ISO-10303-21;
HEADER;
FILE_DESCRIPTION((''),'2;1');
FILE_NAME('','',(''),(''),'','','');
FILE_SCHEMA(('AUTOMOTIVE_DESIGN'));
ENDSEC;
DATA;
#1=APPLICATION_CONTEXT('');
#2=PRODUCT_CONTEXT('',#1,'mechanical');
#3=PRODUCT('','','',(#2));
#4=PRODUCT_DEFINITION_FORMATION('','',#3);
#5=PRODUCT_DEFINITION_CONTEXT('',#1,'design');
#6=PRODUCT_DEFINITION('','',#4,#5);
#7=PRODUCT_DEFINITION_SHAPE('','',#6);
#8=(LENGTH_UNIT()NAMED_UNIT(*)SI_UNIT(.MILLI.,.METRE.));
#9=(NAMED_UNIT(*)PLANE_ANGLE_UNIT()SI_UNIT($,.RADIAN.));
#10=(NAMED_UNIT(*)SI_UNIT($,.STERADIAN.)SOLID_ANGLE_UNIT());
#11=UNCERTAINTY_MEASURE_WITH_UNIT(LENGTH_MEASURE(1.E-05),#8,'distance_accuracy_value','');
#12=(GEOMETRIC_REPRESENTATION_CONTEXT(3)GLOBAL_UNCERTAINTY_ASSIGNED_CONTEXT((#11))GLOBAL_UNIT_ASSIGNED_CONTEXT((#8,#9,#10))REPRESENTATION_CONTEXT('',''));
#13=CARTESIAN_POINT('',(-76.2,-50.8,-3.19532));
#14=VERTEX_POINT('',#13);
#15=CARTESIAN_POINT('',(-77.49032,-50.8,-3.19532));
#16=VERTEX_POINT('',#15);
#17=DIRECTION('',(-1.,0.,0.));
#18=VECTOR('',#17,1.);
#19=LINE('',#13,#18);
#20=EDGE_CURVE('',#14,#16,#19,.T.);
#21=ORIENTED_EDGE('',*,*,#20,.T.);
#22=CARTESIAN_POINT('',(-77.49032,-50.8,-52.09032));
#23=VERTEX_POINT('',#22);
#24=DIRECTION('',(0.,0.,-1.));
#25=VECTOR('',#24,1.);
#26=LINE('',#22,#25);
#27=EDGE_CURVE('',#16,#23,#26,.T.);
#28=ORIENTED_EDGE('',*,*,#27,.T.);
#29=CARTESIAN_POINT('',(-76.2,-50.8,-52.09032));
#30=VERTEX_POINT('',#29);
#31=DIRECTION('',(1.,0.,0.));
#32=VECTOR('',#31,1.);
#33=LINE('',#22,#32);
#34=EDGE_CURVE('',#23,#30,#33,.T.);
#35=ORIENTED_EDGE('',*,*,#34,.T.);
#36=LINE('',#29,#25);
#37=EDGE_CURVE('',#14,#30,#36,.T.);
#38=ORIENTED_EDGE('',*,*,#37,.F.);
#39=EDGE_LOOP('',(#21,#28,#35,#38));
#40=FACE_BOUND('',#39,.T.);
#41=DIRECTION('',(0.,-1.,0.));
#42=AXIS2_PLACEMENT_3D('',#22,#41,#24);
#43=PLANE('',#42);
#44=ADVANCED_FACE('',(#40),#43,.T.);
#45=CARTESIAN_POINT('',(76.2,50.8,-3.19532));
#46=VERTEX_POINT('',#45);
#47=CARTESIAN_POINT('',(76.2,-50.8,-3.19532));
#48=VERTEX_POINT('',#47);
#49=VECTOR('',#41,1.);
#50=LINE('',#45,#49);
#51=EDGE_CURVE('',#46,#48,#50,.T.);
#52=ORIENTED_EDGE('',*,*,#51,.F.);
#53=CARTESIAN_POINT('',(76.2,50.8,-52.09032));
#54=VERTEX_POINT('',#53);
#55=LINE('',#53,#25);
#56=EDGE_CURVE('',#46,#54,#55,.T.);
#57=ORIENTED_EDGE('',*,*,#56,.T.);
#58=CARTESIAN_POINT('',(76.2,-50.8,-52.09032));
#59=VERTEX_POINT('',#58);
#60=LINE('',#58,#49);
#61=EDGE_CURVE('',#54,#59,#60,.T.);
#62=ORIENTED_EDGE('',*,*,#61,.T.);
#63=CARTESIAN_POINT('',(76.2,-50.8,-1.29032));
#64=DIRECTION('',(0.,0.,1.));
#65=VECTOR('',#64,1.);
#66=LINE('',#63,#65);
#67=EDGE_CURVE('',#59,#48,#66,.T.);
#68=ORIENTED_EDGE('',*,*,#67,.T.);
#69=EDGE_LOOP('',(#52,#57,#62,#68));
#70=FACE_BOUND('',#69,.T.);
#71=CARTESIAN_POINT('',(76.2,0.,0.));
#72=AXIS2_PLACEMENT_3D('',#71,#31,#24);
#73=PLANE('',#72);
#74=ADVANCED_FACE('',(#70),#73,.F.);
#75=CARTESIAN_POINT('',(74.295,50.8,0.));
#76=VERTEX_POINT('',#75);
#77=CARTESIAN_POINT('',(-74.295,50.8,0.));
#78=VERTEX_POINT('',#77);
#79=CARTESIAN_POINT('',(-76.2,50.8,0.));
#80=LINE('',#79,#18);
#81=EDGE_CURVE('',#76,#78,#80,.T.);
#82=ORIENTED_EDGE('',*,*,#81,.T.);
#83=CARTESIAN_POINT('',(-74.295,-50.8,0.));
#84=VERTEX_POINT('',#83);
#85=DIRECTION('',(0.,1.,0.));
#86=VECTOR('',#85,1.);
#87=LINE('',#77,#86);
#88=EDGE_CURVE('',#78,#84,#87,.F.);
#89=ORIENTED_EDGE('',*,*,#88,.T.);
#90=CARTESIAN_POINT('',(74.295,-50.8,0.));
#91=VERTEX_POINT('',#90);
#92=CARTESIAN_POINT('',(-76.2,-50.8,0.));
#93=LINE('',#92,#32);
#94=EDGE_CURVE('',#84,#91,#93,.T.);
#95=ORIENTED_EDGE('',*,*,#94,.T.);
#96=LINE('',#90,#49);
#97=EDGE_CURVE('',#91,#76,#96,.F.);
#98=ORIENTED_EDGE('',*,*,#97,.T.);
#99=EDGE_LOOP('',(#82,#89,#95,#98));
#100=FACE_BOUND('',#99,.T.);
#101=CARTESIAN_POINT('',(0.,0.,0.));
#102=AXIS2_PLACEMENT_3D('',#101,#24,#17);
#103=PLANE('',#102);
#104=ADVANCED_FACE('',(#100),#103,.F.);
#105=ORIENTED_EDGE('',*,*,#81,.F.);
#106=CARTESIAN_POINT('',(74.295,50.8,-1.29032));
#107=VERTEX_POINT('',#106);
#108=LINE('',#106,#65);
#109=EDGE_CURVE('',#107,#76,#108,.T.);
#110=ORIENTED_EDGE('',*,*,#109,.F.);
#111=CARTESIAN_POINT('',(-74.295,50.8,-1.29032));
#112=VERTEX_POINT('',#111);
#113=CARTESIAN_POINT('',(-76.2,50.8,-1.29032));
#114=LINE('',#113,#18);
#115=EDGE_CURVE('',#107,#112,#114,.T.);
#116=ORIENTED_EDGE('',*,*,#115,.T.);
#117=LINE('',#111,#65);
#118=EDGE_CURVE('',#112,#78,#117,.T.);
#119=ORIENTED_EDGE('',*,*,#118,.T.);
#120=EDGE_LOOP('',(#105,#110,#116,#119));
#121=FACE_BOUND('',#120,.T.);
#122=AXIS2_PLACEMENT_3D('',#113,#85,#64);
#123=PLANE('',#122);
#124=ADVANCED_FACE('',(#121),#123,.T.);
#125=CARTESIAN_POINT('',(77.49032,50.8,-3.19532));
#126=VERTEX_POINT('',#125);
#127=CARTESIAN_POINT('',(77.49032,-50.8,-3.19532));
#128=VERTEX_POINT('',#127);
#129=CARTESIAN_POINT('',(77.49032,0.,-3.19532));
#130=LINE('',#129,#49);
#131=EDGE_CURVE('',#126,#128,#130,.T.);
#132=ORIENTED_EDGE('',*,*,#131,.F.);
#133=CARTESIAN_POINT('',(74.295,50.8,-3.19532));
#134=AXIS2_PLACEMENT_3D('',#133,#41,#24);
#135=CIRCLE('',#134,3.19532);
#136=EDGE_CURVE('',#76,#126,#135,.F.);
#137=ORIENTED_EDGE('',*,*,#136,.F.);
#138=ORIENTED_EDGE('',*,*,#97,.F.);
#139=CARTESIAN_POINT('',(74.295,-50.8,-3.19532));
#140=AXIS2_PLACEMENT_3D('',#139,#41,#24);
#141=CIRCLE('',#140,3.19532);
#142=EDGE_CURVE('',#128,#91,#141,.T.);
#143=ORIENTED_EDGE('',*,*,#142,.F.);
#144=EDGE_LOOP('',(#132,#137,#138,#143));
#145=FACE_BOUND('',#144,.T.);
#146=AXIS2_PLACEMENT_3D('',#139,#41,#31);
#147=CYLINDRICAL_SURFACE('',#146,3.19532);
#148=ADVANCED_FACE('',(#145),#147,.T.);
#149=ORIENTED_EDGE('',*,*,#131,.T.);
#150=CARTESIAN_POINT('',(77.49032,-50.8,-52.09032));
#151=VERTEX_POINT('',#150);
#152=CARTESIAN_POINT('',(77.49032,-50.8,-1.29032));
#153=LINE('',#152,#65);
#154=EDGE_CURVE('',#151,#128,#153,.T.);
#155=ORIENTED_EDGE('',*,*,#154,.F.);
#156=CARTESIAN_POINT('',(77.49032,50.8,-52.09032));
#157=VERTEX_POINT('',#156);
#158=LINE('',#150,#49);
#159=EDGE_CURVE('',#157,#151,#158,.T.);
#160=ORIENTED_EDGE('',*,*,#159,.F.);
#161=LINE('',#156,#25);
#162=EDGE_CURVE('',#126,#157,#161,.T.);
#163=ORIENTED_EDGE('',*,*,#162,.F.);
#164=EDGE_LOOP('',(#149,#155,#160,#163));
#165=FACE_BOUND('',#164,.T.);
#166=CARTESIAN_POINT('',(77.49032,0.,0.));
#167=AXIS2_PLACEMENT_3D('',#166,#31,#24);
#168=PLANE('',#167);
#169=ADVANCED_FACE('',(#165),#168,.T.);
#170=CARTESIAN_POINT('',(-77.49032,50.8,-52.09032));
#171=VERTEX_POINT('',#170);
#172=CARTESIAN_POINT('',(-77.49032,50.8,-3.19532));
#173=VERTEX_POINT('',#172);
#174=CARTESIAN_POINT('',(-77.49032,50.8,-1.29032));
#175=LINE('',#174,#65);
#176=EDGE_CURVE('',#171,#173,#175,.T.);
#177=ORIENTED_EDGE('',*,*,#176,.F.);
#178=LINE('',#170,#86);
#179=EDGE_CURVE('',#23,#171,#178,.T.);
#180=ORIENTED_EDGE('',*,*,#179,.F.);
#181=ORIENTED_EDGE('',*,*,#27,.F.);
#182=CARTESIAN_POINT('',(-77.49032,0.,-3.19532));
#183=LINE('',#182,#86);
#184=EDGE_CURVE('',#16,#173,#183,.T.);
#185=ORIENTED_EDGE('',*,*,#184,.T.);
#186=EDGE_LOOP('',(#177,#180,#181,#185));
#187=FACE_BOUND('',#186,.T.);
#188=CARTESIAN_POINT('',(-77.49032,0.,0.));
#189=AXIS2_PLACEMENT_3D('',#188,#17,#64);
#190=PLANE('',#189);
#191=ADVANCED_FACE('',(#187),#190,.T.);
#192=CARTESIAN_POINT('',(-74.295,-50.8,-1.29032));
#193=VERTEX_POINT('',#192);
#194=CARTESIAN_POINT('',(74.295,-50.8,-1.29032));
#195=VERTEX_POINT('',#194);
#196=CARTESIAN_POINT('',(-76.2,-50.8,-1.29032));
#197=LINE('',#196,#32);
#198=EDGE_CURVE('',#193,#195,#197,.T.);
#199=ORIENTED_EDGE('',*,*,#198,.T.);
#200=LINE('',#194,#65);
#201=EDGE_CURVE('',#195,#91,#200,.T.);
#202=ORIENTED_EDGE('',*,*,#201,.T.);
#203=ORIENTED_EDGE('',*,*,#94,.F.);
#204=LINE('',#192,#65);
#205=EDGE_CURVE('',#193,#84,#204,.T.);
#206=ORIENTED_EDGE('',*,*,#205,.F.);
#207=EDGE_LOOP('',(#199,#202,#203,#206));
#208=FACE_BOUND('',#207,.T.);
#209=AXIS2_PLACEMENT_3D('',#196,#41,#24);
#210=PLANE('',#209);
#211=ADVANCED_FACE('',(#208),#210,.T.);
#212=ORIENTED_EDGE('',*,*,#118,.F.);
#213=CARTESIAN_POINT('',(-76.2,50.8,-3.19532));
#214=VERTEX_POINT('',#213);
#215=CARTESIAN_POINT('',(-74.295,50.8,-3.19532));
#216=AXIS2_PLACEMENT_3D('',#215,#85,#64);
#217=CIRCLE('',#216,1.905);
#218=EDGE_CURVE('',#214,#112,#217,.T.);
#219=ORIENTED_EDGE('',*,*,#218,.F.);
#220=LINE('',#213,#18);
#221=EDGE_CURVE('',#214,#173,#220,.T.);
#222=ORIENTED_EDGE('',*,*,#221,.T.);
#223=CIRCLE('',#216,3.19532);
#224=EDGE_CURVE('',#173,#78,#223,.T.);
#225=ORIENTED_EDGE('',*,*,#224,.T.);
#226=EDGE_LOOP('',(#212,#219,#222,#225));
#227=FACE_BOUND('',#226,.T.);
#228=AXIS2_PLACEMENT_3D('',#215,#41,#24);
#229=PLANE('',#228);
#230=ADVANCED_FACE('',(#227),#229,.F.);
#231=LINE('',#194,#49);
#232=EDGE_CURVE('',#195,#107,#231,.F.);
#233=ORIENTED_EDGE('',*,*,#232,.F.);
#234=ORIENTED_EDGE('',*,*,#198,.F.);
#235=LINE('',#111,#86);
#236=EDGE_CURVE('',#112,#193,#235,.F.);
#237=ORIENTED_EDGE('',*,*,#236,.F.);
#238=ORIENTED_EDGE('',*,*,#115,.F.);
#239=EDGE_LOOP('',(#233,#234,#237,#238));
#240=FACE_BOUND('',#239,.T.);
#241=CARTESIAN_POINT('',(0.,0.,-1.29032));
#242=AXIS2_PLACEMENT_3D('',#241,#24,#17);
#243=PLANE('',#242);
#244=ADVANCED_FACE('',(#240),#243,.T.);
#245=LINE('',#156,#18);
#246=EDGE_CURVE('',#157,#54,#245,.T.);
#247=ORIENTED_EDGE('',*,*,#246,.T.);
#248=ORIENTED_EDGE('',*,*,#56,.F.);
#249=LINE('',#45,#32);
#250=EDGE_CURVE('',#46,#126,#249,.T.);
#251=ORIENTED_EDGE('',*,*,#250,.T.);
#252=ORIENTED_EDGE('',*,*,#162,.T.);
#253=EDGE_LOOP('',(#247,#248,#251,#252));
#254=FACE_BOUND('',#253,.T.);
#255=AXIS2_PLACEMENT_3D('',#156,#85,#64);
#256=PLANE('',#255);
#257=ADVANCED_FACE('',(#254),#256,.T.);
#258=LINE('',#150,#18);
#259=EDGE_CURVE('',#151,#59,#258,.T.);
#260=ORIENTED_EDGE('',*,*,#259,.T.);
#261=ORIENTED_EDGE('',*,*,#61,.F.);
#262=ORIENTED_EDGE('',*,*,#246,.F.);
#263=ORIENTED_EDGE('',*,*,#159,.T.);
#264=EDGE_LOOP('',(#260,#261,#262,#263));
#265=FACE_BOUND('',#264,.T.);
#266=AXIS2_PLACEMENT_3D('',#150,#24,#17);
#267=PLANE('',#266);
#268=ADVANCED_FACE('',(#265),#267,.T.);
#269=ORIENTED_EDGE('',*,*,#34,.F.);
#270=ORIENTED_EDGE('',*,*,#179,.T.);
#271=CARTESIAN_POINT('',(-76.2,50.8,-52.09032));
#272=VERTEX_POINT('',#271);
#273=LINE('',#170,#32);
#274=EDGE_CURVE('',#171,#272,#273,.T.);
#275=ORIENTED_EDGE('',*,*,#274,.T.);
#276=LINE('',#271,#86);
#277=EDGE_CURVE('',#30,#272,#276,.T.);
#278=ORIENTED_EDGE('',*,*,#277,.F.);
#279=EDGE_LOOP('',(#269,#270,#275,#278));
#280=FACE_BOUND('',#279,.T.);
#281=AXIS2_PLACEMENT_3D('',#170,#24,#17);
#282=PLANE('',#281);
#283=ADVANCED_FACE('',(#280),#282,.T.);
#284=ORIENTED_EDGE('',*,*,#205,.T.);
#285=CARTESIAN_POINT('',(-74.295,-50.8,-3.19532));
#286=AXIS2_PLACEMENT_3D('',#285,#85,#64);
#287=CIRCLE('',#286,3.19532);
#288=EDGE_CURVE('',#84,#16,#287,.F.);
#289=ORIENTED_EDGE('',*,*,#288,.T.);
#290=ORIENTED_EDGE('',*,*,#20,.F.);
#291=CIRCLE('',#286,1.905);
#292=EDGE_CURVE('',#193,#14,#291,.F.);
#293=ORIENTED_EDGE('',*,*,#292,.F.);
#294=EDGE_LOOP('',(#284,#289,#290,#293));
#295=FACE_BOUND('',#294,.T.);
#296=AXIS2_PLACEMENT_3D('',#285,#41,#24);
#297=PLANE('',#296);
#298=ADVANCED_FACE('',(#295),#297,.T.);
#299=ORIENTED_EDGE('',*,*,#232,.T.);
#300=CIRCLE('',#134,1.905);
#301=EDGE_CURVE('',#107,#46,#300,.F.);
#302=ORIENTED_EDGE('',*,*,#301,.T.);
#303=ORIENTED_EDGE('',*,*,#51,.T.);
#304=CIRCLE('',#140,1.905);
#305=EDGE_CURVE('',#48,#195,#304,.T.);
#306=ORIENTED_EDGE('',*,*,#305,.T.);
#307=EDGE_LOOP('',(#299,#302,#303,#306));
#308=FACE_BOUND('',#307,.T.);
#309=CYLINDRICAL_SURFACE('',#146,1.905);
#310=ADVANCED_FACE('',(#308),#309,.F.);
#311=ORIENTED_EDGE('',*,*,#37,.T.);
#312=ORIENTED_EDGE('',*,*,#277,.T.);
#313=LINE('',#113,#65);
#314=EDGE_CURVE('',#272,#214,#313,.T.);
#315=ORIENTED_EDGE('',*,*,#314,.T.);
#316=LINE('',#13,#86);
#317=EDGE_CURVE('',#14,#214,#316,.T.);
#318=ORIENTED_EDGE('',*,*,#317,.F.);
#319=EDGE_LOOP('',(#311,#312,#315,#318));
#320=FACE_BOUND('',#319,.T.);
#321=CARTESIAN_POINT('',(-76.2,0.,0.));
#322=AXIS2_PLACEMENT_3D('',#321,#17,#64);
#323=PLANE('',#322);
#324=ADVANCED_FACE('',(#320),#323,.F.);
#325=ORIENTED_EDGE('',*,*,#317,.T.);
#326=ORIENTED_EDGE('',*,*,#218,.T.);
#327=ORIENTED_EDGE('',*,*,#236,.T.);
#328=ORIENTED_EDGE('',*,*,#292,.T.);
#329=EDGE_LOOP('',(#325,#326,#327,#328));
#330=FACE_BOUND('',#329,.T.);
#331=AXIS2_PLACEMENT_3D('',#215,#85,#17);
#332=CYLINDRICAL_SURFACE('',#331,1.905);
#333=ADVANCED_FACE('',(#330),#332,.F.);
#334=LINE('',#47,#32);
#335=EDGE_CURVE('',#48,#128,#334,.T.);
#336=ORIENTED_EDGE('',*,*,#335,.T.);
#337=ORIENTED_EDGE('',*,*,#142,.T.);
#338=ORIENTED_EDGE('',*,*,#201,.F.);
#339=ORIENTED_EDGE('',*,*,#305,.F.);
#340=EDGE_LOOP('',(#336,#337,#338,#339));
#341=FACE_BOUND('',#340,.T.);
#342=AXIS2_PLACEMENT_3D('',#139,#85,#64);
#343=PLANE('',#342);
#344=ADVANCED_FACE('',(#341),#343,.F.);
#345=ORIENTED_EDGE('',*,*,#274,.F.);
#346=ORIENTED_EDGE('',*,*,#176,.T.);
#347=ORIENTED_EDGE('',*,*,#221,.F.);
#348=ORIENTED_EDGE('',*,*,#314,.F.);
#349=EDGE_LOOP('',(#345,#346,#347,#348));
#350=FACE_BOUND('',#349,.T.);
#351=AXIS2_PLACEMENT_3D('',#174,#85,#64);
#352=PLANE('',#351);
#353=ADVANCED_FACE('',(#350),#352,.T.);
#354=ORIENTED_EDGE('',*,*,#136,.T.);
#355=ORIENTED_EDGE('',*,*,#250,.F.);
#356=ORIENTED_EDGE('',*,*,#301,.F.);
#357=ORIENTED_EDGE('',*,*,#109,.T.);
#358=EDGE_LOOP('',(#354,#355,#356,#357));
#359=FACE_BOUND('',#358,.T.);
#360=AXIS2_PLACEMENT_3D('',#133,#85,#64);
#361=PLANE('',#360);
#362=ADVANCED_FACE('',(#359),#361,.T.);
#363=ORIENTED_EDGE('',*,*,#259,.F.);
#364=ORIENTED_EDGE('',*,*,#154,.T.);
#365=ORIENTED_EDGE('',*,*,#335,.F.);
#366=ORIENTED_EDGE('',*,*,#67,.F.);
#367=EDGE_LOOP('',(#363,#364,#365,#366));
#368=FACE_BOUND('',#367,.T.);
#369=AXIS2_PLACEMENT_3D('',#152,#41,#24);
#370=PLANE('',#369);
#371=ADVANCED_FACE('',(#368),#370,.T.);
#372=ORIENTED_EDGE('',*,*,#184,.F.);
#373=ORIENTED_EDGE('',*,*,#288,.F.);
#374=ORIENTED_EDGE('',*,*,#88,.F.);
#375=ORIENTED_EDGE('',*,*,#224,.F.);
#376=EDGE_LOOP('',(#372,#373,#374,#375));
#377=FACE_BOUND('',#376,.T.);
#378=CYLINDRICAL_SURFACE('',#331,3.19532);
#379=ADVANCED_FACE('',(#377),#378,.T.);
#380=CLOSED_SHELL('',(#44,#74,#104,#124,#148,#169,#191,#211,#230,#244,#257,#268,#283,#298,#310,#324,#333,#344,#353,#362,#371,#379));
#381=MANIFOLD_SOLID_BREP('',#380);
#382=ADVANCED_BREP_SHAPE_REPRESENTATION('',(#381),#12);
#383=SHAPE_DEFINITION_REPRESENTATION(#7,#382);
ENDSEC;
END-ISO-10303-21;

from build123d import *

# Parameters (mm, degrees)
SKETCH1_W                      = 152.4
SKETCH1_H                      = 101.6
BASE_FLANGE1_DEPTH             = 1.29032
EDGE_FLANGE1_STRIP_W           = 8.97128
EDGE_FLANGE1_STRIP_H           = 1.29032
EDGE_FLANGE1_STRIP_CUT_DEPTH   = 101.6
EDGE_FLANGE1_STRIP_2_W         = 8.97128
EDGE_FLANGE1_STRIP_2_H         = 1.29032
EDGE_FLANGE1_STRIP_CUT_2_DEPTH = 101.6
EDGE_FLANGE1_DEPTH             = 101.6
EDGE_FLANGE1_BEND_DEPTH        = 101.6


# Sheet-metal steps are written as plain solids
with BuildPart() as part:
    # Sketch1 → Base-Flange1 (new body)
    with BuildSketch(Plane.XY):
        Rectangle(SKETCH1_W, SKETCH1_H)
    extrude(amount=-BASE_FLANGE1_DEPTH)

    # Edge-Flange1 strip (across the edge) → Edge-Flange1 strip cut (cut)
    with BuildSketch(Plane(origin=(-76.2, -50.8, -1.29032), x_dir=(1, 0, 0), z_dir=(0, 1, 0))):
        with Locations((-2.58064, -0.64516)):
            Rectangle(EDGE_FLANGE1_STRIP_W, EDGE_FLANGE1_STRIP_H)
    extrude(amount=EDGE_FLANGE1_STRIP_CUT_DEPTH, mode=Mode.SUBTRACT)

    # Edge-Flange1 strip 2 (across the edge) → Edge-Flange1 strip cut 2 (cut)
    with BuildSketch(Plane(origin=(76.2, 50.8, -1.29032), x_dir=(-1, 0, 0), z_dir=(0, -1, 0))):
        with Locations((-2.58064, -0.64516)):
            Rectangle(EDGE_FLANGE1_STRIP_2_W, EDGE_FLANGE1_STRIP_2_H)
    extrude(amount=EDGE_FLANGE1_STRIP_CUT_2_DEPTH, mode=Mode.SUBTRACT)

    # Edge-Flange1 section (across the edge) → Edge-Flange1 (add)
    with BuildSketch(Plane(origin=(-76.2, -50.8, -1.29032), x_dir=(1, 0, 0), z_dir=(0, 1, 0))):
        with BuildLine():
            Line((-1.29032, 1.905), (-1.29032, 50.8))
            Line((-1.29032, 50.8), (0, 50.8))
            Line((0, 50.8), (0, 1.905))
            ThreePointArc((0, 1.905), (0.557961582, 0.557961582), (1.905, 0))
            Line((1.905, 0), (1.905, -1.29032))
            ThreePointArc((1.905, -1.29032), (-0.35443244, -0.35443244), (-1.29032, 1.905))
        make_face()
    extrude(amount=EDGE_FLANGE1_DEPTH)

    # Edge-Flange1 section 2 (across the edge) → Edge-Flange1 bend (add)
    with BuildSketch(Plane(origin=(76.2, 50.8, -1.29032), x_dir=(-1, 0, 0), z_dir=(0, -1, 0))):
        with BuildLine():
            Line((-1.29032, 1.905), (-1.29032, 50.8))
            Line((-1.29032, 50.8), (0, 50.8))
            Line((0, 50.8), (0, 1.905))
            ThreePointArc((0, 1.905), (0.557961582, 0.557961582), (1.905, 0))
            Line((1.905, 0), (1.905, -1.29032))
            ThreePointArc((1.905, -1.29032), (-0.35443244, -0.35443244), (-1.29032, 1.905))
        make_face()
    extrude(amount=EDGE_FLANGE1_BEND_DEPTH)


solid = part.part
